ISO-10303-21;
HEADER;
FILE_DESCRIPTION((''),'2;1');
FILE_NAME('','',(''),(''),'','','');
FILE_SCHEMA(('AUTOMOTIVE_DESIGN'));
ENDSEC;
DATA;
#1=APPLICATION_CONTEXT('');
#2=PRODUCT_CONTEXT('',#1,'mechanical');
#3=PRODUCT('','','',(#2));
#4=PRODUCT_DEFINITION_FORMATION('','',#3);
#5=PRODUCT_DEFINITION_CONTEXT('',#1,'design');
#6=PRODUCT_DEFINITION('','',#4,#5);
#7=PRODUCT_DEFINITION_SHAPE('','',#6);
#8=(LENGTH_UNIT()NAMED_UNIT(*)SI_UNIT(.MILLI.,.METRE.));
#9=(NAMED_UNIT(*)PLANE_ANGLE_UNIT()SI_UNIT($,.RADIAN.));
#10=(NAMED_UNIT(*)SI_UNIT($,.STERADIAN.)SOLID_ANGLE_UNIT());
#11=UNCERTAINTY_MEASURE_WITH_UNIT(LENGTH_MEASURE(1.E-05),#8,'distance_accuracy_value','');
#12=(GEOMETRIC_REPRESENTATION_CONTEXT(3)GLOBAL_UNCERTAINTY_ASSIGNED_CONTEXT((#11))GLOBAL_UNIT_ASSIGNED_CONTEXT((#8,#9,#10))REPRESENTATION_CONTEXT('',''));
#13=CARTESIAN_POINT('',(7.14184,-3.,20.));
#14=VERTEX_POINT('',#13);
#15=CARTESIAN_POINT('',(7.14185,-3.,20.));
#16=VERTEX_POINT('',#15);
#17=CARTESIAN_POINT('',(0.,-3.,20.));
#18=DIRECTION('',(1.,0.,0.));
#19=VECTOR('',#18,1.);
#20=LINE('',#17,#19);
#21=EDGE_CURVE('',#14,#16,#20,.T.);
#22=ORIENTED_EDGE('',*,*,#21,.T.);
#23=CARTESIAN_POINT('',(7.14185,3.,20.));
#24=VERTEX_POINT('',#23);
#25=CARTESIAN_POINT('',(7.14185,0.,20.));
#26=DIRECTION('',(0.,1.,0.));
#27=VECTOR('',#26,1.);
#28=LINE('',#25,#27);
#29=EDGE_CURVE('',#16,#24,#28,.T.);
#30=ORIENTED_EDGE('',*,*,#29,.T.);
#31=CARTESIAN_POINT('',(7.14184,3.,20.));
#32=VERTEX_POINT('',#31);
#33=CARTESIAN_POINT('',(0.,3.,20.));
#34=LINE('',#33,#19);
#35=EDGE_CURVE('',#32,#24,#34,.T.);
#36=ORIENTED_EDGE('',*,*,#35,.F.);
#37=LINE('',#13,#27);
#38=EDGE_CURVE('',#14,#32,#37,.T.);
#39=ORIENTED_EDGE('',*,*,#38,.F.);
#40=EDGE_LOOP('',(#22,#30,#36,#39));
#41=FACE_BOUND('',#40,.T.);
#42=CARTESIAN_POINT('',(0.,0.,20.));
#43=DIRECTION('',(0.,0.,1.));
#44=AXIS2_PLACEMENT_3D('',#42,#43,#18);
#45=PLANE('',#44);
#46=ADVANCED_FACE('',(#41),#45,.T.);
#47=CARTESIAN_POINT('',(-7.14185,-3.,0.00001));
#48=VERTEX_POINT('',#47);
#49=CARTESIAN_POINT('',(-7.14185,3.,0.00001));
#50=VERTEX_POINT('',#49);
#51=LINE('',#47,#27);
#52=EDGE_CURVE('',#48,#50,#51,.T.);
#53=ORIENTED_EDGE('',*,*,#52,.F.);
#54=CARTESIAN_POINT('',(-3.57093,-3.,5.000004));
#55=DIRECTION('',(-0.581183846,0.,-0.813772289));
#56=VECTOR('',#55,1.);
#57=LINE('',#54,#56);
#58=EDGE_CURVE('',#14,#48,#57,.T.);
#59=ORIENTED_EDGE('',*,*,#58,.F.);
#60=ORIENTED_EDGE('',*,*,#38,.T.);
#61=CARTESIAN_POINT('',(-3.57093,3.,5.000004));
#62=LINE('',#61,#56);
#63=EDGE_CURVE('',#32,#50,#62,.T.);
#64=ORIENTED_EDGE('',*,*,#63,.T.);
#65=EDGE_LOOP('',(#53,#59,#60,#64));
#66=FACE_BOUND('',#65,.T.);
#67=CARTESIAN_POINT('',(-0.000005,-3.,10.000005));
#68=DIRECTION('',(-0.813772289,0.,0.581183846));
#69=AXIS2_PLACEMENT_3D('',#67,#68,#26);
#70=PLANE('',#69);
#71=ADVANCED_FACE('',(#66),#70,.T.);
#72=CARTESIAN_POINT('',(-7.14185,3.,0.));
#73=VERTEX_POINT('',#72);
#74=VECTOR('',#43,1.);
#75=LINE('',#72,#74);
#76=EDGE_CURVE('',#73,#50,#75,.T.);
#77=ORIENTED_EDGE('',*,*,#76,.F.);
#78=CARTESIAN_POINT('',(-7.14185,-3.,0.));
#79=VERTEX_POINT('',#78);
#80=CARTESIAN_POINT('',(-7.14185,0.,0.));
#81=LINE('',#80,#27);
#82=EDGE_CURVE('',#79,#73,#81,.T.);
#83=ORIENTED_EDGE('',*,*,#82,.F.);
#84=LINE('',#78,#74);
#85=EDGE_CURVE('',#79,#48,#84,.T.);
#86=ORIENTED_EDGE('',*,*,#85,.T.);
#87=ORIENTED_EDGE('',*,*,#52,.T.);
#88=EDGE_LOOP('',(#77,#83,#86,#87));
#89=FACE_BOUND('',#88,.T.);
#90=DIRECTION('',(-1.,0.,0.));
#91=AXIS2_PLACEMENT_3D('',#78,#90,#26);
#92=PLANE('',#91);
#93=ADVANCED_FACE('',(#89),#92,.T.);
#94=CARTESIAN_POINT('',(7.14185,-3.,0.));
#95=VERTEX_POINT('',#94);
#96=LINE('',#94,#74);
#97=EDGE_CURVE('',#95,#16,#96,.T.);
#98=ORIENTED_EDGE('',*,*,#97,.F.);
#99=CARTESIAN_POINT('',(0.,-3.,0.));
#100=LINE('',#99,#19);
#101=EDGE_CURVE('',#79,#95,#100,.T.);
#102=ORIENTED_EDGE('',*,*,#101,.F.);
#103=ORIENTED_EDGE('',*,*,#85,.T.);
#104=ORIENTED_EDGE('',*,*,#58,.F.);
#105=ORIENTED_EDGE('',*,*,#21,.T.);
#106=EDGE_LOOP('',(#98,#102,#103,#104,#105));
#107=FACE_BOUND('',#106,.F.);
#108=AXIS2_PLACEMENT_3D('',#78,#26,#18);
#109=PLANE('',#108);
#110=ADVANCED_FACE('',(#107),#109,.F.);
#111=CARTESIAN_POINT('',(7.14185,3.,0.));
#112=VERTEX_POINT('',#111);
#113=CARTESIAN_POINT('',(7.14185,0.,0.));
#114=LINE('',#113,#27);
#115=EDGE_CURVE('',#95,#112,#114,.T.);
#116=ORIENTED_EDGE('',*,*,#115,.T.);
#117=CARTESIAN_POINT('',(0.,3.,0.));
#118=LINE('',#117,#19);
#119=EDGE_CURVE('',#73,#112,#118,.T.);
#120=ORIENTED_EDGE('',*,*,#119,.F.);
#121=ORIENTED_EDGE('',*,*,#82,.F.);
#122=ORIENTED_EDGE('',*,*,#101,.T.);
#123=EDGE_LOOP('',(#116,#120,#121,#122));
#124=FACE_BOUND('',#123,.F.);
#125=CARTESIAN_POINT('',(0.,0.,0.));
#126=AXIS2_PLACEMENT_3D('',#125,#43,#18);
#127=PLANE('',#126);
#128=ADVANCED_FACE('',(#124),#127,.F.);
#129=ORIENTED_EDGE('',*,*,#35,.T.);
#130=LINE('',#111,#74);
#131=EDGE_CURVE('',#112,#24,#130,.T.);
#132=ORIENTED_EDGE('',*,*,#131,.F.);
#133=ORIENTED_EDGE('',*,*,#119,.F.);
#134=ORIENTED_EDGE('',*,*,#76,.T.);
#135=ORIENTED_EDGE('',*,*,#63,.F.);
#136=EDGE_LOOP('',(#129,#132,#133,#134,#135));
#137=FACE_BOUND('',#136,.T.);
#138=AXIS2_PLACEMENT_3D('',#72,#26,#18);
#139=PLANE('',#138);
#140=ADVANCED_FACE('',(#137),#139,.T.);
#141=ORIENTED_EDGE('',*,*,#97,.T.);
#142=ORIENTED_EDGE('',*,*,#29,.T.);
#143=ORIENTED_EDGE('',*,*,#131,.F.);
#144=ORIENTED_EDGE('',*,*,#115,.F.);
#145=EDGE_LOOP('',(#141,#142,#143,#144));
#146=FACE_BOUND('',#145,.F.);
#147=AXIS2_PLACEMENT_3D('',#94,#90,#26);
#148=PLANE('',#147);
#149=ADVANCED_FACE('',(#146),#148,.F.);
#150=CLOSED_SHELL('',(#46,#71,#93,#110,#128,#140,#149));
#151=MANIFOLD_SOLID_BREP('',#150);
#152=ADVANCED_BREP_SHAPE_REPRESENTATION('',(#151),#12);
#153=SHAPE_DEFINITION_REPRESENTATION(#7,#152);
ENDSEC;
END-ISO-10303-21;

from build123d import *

# Parameters (mm, degrees)
F0_W     = 14.2837
F0_H     = 6
F1_DEPTH = 20
F2_SIZE2 = 19.99999
F2_SIZE  = 14.28369


# Not quite as in the source:
# - a fillet or chamfer is up to 0.001 mm smaller than in the source, because OpenCascade refuses the exact size


with BuildPart() as f1:
    # F0 (on Top) → F1 (new body)
    with BuildSketch(Plane.XY):
        Rectangle(F0_W, F0_H)
    extrude(amount=F1_DEPTH)

    # F2 (size 14.2837 and 20 in the source; OpenCascade refuses exactly that, so slightly less here)
    f2_edges = [f1.edges().sort_by_distance(p)[0] for p in [
        (-7.14185, 0, 20),
    ]]
    f2_side = f1.faces().sort_by_distance((0, 0, 20))[0]
    chamfer(f2_edges, length=F2_SIZE, length2=F2_SIZE2, reference=f2_side)


solid = f1.part
